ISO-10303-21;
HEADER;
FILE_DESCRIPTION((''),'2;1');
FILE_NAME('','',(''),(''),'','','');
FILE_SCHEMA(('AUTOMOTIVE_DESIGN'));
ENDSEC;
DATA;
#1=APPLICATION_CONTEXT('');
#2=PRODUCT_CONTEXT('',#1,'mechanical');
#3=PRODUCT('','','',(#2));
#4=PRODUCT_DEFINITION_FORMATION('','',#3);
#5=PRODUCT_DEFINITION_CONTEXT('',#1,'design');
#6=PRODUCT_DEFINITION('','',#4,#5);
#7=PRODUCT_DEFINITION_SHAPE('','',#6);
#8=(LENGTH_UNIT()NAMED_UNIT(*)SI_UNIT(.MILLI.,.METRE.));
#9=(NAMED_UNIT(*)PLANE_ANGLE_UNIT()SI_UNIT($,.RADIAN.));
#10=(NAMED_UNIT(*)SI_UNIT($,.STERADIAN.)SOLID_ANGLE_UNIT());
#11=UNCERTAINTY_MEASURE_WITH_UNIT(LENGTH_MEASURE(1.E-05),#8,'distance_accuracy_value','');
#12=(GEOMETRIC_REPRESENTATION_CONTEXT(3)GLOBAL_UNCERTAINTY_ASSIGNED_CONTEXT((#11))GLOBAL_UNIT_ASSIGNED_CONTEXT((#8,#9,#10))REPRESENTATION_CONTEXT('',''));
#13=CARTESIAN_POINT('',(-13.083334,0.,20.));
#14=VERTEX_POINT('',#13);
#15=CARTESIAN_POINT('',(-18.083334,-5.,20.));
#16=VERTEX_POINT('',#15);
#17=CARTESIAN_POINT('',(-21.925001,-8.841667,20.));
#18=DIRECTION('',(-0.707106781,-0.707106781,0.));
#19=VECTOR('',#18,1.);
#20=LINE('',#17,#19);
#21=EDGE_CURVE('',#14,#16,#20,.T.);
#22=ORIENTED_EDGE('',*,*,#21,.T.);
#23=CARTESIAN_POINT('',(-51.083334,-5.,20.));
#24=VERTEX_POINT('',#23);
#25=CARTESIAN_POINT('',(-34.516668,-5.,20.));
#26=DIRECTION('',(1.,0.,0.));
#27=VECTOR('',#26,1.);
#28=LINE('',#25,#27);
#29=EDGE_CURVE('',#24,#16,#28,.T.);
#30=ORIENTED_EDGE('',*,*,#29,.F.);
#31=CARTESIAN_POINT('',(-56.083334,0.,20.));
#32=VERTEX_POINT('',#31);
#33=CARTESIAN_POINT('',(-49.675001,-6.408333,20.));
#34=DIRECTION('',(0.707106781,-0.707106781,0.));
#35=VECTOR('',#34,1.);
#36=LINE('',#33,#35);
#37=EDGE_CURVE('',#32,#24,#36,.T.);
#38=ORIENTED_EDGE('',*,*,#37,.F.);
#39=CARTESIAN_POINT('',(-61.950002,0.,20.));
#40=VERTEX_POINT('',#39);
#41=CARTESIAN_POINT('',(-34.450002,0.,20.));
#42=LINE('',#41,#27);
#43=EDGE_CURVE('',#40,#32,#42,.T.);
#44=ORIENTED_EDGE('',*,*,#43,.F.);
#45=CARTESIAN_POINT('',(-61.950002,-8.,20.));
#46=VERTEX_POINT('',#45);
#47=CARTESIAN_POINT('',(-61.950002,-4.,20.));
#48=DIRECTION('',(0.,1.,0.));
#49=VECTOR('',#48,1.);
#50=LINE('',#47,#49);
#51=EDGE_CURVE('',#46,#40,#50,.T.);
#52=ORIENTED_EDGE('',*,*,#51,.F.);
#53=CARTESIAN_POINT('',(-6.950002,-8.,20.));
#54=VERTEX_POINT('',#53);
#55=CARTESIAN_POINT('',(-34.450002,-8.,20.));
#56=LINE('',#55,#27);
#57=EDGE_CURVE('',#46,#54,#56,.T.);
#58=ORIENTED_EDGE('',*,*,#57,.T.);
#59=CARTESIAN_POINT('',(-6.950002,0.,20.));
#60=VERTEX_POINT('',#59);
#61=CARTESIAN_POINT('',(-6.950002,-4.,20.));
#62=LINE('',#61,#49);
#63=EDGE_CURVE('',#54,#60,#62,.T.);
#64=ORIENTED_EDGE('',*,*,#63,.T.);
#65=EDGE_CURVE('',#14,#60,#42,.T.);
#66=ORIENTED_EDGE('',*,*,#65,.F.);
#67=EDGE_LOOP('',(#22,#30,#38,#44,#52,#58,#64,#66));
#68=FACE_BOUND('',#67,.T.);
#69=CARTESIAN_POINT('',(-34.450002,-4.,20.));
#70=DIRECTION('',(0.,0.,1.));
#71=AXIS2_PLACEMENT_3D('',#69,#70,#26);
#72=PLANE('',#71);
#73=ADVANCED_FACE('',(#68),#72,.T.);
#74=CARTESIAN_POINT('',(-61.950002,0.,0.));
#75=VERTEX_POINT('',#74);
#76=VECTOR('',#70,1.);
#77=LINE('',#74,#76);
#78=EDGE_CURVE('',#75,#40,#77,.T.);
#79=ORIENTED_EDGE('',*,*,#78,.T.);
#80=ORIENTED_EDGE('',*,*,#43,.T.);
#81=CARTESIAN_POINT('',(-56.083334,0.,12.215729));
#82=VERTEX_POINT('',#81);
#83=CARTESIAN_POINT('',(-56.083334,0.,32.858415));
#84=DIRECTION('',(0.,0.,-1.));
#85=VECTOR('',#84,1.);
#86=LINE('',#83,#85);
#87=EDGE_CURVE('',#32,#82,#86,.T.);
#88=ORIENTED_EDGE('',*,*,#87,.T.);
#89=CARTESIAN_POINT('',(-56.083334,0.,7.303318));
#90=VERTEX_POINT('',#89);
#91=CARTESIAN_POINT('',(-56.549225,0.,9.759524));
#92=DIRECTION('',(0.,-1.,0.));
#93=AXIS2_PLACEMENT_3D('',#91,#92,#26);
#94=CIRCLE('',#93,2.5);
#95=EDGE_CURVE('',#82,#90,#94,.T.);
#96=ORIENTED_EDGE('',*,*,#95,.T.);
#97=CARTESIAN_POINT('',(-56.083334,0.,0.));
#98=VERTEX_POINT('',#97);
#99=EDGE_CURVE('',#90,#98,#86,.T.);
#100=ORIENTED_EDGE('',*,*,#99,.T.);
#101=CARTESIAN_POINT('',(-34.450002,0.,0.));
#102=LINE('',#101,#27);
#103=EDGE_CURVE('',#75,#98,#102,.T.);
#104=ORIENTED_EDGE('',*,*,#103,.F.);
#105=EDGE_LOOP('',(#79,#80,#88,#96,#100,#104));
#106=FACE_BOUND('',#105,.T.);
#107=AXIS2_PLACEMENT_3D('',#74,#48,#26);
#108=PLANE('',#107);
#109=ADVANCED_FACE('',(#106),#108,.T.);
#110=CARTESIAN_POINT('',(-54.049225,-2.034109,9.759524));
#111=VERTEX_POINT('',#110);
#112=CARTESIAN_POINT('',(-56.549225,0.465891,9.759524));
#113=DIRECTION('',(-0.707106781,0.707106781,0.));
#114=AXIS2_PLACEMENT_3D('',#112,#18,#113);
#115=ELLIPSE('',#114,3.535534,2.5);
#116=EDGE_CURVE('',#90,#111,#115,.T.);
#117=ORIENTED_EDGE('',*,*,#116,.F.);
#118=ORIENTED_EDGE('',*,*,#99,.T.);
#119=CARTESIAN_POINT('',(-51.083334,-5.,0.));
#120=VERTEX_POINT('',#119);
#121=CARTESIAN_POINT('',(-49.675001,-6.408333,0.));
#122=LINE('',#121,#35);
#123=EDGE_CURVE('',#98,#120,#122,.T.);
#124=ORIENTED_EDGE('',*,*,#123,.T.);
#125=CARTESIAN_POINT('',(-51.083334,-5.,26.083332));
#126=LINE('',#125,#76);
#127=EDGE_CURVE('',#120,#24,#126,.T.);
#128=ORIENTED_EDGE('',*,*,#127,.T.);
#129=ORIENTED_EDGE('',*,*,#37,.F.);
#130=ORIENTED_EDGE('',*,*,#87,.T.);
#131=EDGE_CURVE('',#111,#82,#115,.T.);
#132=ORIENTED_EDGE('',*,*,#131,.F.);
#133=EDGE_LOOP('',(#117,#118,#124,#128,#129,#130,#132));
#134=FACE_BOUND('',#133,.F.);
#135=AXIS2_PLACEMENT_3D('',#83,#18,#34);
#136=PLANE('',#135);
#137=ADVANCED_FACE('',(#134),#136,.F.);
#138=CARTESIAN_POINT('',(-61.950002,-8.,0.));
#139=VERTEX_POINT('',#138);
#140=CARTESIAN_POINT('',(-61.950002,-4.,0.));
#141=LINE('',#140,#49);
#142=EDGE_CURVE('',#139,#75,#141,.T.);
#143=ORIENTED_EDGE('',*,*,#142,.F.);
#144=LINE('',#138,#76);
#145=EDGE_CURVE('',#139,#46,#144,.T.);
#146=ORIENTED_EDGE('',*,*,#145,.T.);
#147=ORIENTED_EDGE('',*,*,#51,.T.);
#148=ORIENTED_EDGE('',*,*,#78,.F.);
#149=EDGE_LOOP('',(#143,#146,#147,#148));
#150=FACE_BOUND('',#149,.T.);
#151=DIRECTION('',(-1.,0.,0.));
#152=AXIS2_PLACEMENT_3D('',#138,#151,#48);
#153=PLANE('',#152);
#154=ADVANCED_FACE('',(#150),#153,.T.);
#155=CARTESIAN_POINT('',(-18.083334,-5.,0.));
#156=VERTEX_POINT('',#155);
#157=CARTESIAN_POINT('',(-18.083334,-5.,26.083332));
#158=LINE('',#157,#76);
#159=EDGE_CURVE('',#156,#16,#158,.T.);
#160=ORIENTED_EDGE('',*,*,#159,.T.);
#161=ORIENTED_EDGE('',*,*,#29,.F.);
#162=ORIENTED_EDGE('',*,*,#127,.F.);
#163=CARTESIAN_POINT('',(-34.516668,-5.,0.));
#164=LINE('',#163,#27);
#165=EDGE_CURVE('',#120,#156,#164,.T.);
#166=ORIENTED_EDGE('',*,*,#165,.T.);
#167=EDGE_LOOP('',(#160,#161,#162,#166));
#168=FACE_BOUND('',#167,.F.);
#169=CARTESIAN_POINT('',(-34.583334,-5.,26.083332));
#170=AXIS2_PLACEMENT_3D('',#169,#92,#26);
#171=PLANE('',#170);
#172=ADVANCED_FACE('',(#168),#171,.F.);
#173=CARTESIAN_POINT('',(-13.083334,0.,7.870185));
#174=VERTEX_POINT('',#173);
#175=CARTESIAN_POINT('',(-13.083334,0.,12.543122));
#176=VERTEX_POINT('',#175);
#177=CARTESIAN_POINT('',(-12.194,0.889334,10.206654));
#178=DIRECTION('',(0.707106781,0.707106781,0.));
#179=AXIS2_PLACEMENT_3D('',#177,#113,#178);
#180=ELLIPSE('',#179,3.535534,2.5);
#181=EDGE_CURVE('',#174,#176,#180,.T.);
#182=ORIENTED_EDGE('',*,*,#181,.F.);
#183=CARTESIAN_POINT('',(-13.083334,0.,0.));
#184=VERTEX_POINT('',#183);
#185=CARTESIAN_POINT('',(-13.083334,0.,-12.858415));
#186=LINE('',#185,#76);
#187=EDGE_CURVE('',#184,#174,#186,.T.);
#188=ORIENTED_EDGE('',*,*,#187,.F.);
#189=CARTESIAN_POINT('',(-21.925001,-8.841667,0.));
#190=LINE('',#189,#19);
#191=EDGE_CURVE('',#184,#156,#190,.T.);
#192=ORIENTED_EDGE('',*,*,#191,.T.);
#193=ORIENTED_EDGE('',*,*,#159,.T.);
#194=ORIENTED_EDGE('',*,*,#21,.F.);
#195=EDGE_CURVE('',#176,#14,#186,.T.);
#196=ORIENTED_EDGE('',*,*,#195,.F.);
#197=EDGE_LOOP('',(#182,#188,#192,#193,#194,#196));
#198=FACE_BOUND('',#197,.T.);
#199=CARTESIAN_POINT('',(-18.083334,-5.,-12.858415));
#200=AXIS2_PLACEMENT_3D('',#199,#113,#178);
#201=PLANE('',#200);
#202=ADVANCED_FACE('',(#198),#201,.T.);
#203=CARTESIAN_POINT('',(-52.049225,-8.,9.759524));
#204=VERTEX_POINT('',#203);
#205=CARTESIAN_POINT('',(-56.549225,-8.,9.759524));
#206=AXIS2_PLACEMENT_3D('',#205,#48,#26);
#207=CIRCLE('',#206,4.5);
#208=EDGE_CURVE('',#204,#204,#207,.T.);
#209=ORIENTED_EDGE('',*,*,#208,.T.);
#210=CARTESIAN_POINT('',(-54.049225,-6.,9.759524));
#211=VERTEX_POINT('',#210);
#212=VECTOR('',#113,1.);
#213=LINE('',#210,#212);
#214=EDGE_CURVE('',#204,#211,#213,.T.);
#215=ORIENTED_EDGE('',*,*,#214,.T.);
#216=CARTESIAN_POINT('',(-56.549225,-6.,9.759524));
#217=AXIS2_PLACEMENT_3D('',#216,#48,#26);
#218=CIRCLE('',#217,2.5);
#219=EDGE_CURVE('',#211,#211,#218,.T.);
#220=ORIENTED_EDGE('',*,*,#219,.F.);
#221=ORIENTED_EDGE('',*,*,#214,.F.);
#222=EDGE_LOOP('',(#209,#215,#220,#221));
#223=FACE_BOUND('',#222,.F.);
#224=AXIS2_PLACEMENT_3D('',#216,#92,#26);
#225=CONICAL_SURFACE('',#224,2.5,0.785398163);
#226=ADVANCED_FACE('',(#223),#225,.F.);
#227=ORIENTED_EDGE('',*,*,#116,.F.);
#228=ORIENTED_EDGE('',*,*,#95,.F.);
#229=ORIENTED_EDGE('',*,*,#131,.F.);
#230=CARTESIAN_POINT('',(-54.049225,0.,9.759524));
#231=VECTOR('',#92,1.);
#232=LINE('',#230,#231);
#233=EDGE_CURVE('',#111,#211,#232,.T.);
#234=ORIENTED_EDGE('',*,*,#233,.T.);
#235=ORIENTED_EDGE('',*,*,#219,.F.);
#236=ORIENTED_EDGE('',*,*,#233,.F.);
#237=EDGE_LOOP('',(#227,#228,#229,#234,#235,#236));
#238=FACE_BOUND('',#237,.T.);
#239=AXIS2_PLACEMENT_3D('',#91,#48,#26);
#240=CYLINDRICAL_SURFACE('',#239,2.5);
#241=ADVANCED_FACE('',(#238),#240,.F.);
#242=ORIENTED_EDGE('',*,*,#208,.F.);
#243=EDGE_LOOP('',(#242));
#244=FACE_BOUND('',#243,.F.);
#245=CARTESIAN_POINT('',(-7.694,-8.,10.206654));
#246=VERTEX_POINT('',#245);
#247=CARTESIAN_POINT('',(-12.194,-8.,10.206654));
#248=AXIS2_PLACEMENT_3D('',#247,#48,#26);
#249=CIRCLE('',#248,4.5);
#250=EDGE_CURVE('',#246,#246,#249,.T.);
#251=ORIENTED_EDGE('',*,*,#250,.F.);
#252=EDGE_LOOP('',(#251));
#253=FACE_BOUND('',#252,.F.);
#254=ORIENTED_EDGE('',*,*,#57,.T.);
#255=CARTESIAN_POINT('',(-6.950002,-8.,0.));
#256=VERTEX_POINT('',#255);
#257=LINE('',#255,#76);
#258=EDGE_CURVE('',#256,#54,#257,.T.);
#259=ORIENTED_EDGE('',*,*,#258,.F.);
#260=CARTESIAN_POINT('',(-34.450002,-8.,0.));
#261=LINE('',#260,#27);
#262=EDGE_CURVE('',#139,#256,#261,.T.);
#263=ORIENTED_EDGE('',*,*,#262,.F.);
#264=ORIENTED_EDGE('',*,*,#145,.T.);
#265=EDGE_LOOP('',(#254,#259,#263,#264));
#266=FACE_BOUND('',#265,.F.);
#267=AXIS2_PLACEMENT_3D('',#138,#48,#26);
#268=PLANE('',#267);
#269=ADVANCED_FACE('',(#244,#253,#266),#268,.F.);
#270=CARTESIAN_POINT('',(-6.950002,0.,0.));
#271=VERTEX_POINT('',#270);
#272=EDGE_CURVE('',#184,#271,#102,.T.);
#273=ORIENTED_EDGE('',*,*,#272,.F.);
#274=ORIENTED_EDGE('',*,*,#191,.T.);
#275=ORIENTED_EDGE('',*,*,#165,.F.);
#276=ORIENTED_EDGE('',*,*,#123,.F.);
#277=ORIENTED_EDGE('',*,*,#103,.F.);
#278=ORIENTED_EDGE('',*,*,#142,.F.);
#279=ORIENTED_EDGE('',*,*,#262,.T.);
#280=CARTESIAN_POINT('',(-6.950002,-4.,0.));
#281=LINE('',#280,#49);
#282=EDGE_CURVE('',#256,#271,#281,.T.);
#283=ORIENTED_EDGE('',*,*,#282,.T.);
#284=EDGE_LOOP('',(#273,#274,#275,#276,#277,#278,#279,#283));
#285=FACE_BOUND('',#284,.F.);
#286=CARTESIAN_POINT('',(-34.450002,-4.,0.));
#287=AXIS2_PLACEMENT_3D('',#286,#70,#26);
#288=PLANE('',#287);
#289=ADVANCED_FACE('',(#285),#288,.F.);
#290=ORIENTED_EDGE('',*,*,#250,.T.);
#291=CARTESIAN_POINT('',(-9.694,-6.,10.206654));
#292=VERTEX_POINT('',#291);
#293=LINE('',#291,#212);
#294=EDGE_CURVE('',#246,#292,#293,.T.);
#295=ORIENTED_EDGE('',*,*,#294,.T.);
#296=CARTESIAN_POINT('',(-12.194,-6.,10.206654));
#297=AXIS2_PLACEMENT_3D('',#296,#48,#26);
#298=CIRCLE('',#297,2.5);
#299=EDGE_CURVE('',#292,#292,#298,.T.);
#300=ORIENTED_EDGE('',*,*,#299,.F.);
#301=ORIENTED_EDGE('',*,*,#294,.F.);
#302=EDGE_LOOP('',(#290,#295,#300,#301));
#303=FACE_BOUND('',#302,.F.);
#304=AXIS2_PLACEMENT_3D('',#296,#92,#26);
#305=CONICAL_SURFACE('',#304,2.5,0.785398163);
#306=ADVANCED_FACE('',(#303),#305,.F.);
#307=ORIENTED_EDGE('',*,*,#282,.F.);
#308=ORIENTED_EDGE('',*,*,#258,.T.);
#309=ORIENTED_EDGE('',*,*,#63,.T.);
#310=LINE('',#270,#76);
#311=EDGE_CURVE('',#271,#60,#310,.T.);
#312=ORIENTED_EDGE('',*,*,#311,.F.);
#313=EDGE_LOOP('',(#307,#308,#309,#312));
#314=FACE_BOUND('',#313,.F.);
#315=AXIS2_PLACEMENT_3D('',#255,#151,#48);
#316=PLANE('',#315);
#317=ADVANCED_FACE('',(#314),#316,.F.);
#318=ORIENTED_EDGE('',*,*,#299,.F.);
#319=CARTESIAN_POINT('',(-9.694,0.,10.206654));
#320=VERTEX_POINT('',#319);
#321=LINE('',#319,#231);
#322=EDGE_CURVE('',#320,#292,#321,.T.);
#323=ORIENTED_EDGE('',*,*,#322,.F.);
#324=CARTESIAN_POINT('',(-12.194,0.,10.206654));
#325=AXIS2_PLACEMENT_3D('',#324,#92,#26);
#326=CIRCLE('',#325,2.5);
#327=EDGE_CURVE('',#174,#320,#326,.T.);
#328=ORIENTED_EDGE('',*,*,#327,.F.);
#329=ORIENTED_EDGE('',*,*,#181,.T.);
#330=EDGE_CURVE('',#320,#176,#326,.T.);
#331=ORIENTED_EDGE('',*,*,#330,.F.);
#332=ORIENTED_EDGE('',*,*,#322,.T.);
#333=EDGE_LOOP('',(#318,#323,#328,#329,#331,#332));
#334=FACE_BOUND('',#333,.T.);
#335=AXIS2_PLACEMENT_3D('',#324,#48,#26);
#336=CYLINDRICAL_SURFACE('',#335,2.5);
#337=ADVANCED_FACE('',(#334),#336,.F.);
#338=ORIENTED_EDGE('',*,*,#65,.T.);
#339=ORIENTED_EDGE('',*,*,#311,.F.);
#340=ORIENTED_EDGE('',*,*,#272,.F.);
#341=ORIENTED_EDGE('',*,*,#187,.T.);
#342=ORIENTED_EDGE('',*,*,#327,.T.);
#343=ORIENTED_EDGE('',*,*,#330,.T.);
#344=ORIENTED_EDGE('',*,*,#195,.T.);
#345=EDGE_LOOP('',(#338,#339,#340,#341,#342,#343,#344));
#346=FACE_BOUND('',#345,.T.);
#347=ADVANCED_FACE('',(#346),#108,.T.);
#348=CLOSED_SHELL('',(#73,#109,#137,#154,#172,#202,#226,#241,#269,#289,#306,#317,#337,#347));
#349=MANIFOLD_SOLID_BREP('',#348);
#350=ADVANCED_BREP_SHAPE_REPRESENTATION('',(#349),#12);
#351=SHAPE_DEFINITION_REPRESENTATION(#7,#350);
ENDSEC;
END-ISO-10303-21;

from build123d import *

# Parameters (mm, degrees)
F0_W        = 55
F0_H        = 8
F1_DEPTH    = 20
F2_R        = 2.5
F3_DEPTH    = 35.3
F4_W        = 33
F4_H        = 86
F5_DEPTH    = 5
F6_SIZE     = 2
F7_SIZE     = 2
F8_T4_DEPTH = 45.7168298797
F8_T9_DEPTH = 45.7168298797


# Not quite as in the source:
# - a fillet or chamfer that OpenCascade refuses, or shapes differently, is made with other operations: its cross-section is extruded or revolved along the edge and cut away or added


with BuildPart() as f1:
    # F0 (on Top) → F1 (new body)
    with BuildSketch(Plane.XY):
        with Locations((-34.4500018656, -4)):
            Rectangle(F0_W, F0_H)
    extrude(amount=F1_DEPTH)

    # F2 (on Front) → F3 (cut)
    with BuildSketch(Plane.XZ):
        with Locations((-56.5492250025, 9.7595239058)):
            Circle(F2_R)
        with Locations((-12.1940001845, 10.2066537365)):
            Circle(F2_R)
    extrude(amount=F3_DEPTH, mode=Mode.SUBTRACT)

    # F4 (on Front) → F5 (cut)
    with BuildSketch(Plane.XZ):
        with Locations((-34.5833339691, 26.0833319575)):
            Rectangle(F4_W, F4_H)
    extrude(amount=F5_DEPTH, mode=Mode.SUBTRACT)

    # F6
    f6_edges = [f1.edges().sort_by_distance(p)[0] for p in [
        (-14.694, -8, 10.206654),
    ]]
    chamfer(f6_edges, length=F6_SIZE)

    # F7
    f7_edges = [f1.edges().sort_by_distance(p)[0] for p in [
        (-59.049225, -8, 9.759524),
    ]]
    chamfer(f7_edges, length=F7_SIZE)

    # F8: chamfer of 5 on 2 edges, made by hand


with BuildPart() as f8_tool2:
    # F8_s3 → F8_t4 (new body)
    with BuildSketch(Plane.XY.offset(32.8584149398)):
        Polygon((-56.0833339691, 0), (-51.0833339691, -5), (-51.0833339691, 0), align=None)
    extrude(amount=-F8_T4_DEPTH)

    split(bisect_by=Plane.XZ.offset(5), keep=Keep.BOTTOM)


with BuildPart() as f1_1:
    add(f1.part)

    # F8_t1: cut F8_tool2
    add(f8_tool2.part, mode=Mode.SUBTRACT)


with BuildPart() as f8_tool7:
    # F8_s8 → F8_t9 (new body)
    with BuildSketch(Plane.XY.offset(-12.8584149398)):
        Polygon((-18.0833339691, -5), (-13.0833339691, 0), (-18.0833339691, 0), align=None)
    extrude(amount=F8_T9_DEPTH)

    split(bisect_by=Plane.XZ.offset(5), keep=Keep.BOTTOM)


with BuildPart() as f1_2:
    add(f1_1.part)

    # F8_t6: cut F8_tool7
    add(f8_tool7.part, mode=Mode.SUBTRACT)


solid = f1_2.part
